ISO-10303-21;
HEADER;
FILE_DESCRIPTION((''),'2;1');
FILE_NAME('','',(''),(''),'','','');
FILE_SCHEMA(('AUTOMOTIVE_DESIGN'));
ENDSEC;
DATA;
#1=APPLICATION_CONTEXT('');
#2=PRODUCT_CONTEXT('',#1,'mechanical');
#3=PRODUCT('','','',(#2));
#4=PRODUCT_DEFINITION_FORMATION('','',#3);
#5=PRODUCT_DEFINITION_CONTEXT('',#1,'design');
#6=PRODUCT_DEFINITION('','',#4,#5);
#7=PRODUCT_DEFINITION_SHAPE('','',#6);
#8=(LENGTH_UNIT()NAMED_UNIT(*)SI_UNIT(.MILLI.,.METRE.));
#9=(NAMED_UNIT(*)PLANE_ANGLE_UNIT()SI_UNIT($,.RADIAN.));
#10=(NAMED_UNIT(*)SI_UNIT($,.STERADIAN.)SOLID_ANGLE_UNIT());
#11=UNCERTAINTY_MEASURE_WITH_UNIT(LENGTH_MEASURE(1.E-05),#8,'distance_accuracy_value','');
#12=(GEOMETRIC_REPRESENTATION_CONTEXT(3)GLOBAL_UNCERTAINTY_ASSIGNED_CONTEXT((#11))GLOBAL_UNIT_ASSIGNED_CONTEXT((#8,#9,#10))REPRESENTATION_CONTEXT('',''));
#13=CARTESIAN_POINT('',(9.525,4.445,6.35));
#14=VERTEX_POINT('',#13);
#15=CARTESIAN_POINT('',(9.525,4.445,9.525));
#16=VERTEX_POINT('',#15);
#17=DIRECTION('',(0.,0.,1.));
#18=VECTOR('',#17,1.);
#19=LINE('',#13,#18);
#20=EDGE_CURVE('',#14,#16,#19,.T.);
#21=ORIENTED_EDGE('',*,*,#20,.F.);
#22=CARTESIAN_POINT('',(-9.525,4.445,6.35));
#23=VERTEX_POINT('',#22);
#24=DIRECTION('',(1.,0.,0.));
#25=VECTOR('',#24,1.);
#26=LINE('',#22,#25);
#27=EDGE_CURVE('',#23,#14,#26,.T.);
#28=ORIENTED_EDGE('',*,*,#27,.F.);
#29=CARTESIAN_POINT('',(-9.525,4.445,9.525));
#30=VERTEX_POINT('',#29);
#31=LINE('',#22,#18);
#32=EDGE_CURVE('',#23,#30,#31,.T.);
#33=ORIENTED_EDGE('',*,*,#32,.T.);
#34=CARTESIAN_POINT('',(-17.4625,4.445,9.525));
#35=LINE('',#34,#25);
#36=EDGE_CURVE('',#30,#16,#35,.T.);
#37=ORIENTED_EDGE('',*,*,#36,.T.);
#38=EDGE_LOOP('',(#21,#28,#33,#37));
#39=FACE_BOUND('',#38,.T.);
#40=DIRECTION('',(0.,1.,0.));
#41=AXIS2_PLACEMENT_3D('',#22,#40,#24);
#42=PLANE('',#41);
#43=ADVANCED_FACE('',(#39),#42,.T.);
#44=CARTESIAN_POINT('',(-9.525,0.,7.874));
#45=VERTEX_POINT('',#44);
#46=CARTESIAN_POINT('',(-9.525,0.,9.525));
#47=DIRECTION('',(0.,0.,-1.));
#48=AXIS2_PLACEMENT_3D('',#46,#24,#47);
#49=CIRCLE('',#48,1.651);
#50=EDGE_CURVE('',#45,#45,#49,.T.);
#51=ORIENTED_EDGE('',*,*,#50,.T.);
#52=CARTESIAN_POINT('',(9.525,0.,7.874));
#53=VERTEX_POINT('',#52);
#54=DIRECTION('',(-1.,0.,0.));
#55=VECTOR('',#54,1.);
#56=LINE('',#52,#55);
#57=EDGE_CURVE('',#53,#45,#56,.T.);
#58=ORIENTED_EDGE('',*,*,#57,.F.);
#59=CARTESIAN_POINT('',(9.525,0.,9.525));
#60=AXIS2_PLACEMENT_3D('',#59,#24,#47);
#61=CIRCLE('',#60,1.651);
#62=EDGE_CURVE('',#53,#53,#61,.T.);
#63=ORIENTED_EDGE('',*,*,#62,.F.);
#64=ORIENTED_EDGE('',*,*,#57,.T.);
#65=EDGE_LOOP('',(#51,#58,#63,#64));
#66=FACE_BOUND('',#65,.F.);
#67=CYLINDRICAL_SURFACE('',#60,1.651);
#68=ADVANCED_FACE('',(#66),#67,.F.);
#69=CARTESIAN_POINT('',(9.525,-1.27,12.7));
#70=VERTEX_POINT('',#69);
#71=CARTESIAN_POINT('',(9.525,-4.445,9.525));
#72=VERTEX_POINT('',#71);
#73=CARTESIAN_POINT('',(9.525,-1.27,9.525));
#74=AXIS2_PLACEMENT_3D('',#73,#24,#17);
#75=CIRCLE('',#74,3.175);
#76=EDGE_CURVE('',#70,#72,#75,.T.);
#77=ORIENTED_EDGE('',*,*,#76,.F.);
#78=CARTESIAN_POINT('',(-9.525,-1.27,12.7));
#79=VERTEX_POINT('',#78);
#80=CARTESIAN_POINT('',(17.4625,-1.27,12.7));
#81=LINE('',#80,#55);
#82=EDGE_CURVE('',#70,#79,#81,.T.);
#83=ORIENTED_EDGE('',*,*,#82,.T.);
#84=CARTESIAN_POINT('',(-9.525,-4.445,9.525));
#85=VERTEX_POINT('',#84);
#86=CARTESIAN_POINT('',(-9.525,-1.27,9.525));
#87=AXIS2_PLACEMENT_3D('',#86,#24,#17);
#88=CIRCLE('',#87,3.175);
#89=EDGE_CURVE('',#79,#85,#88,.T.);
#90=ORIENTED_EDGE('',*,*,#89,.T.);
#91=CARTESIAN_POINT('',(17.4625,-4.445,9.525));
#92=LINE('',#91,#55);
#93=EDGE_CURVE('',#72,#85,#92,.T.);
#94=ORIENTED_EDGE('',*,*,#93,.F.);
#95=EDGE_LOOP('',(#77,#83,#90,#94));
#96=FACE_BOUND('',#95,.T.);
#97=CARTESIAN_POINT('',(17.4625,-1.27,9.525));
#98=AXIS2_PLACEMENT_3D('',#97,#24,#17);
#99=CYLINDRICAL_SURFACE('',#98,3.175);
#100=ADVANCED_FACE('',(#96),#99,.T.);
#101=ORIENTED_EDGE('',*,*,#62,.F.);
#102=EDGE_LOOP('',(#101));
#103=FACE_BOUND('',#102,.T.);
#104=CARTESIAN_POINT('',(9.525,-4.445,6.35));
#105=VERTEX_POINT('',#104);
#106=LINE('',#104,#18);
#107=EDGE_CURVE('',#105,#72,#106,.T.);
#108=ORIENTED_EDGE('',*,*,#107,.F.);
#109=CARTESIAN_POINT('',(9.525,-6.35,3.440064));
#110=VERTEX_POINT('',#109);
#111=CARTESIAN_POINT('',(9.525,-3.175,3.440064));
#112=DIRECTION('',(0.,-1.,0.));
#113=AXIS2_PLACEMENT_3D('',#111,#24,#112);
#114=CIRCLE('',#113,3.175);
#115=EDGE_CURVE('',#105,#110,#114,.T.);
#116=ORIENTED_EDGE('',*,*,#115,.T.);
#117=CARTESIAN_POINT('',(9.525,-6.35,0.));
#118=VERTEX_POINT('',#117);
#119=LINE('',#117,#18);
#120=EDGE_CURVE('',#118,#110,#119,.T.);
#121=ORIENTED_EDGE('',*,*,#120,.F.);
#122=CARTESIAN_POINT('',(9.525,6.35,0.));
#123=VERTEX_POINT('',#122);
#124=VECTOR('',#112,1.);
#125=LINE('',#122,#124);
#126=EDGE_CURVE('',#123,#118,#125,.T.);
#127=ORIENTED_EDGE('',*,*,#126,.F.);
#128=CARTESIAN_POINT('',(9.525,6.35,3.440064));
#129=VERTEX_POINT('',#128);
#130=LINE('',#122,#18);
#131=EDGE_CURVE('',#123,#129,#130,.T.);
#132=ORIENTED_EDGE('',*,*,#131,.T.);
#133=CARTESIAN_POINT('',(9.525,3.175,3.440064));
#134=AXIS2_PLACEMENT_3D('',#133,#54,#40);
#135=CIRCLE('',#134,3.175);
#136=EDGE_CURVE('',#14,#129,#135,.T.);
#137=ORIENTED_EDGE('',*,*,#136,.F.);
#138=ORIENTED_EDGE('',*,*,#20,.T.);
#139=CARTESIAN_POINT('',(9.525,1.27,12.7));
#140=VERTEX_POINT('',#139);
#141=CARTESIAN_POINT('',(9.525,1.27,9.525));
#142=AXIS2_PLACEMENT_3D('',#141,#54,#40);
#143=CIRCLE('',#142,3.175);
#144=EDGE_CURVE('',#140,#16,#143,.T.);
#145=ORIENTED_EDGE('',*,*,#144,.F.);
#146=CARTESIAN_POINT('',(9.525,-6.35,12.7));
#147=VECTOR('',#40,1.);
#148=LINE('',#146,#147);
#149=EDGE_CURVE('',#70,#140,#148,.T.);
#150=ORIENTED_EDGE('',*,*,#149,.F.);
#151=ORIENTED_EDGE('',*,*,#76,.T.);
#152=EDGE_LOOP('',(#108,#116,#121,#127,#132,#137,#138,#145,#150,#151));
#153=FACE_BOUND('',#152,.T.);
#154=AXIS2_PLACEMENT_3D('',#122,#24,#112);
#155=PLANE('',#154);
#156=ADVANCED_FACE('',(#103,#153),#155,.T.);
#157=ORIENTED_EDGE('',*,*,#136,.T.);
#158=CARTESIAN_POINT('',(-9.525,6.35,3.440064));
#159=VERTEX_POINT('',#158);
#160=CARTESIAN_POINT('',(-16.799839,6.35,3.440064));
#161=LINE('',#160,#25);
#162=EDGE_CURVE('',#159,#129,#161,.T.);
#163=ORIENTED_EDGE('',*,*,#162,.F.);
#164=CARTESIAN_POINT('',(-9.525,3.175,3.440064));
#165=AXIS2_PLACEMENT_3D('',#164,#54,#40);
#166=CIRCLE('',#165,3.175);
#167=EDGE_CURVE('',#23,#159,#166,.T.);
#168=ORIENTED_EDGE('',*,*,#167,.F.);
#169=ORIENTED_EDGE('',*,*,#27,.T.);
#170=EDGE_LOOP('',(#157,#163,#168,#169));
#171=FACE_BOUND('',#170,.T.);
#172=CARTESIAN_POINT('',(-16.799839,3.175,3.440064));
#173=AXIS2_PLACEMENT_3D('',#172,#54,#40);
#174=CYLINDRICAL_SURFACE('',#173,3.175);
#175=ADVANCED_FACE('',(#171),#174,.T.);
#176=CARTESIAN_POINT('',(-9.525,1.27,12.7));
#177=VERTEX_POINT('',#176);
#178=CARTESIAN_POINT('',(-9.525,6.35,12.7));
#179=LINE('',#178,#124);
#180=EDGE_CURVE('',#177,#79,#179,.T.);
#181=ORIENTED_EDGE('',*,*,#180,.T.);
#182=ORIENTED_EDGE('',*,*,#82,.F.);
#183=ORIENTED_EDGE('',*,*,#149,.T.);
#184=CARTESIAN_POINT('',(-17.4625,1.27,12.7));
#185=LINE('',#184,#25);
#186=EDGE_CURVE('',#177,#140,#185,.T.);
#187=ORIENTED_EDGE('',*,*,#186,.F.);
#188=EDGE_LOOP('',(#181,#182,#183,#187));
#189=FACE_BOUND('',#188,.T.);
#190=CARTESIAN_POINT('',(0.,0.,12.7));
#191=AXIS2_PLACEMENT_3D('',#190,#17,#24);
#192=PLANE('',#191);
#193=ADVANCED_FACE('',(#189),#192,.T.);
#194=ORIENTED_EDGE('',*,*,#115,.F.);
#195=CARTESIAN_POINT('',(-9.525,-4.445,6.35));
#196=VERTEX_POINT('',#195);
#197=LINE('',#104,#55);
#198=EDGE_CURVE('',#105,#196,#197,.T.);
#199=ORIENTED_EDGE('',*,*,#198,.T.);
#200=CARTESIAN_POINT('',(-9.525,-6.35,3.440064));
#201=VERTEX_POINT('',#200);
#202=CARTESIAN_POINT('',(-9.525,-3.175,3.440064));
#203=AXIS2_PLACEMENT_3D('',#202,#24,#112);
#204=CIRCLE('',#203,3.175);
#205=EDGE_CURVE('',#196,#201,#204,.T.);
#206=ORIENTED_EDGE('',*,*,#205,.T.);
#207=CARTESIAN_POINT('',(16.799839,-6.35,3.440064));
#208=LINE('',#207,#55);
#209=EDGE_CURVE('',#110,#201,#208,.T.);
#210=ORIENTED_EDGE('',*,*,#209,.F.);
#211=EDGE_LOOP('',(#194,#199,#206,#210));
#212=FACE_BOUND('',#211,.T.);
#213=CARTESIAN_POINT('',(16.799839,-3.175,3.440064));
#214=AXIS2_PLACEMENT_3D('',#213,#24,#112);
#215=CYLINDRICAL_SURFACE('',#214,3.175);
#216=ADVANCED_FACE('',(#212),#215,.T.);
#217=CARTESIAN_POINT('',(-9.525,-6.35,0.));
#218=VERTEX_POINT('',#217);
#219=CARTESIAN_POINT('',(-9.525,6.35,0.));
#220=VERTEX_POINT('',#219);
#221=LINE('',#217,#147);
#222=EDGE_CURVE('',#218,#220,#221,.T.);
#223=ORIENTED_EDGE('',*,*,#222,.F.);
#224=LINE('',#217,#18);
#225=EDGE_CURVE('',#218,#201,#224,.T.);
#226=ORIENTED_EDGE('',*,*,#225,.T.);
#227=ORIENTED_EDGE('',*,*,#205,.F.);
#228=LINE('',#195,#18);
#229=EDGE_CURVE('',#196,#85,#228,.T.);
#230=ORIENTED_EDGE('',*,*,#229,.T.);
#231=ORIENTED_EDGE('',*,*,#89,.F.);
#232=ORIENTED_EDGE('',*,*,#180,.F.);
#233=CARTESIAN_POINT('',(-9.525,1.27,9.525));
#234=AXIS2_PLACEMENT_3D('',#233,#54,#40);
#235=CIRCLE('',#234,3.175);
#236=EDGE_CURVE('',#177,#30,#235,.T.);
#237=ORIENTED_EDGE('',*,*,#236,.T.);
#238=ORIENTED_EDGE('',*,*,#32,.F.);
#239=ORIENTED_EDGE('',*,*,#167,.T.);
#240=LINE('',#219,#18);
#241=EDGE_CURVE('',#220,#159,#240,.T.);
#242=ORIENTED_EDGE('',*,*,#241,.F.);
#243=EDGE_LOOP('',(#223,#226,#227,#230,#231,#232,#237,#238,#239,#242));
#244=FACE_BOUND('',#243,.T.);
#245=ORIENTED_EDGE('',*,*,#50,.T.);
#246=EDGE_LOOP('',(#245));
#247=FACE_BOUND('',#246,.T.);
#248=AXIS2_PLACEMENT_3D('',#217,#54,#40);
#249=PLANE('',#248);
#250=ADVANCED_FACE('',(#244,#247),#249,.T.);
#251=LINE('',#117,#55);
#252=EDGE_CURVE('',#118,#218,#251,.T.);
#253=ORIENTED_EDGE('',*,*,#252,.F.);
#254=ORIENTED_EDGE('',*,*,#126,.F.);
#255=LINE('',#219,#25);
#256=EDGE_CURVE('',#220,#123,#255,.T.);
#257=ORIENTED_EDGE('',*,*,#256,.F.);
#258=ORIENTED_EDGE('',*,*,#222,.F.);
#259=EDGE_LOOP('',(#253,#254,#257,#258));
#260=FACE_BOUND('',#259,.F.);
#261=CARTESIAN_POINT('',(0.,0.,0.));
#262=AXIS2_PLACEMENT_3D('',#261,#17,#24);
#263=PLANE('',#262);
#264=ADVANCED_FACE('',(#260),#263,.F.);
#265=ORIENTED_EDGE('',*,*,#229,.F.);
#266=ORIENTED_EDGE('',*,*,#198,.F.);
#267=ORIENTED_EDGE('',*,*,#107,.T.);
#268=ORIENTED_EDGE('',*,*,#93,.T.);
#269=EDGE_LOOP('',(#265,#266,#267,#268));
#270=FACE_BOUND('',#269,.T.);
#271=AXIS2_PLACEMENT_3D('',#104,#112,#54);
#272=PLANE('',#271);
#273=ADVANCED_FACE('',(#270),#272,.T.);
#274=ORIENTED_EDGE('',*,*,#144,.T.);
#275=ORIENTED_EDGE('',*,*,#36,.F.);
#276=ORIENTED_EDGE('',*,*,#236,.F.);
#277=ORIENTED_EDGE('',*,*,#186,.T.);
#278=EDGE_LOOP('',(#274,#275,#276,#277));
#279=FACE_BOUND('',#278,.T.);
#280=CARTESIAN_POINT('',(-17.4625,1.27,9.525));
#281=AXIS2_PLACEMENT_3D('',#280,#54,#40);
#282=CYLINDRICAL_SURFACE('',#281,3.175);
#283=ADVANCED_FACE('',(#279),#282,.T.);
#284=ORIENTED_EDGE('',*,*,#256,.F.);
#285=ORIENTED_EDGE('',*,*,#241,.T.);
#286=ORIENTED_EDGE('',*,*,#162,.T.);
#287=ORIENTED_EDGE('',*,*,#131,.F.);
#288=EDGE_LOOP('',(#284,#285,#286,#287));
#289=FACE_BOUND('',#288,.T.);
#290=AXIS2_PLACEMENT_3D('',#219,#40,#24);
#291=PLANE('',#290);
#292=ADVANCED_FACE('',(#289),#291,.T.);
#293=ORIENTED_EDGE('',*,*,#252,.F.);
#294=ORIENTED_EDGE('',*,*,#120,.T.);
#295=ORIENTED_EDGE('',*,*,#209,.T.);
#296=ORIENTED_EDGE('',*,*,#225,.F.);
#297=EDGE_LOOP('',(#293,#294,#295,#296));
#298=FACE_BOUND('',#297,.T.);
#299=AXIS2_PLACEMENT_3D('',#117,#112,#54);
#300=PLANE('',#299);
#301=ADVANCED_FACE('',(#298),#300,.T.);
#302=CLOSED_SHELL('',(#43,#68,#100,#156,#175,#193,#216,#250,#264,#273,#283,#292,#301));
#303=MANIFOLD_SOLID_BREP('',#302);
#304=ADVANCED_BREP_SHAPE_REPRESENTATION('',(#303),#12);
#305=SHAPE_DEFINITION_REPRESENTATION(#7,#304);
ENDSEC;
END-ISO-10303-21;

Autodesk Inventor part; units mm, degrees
ref_plane "YZ Plane" through (0, 0, 0) normal (1, 0, 0) x (0, 1, 0)
ref_plane "XZ Plane" through (0, 0, 0) normal (0, 1, 0) x (-1, 0, 0)
ref_plane "XY Plane" through (0, 0, 0) normal (0, 0, 1) x (1, 0, 0)
sketch "Sketch1" plane through (0, 0, 0) normal (0, 0, 1) x (1, 0, 0)
  line L0 (9.525, -6.35) -> (-9.525, -6.35)
  line L1 (-9.525, -6.35) -> (-9.525, 6.35)
  line L2 (-9.525, 6.35) -> (9.525, 6.35)
  line L3 (9.525, 6.35) -> (9.525, -6.35)
  line L4 (9.525, -6.35) -> (-9.525, 6.35) construction
  line L5 (-9.525, -6.35) -> (9.525, 6.35) construction
  point P0 (0, 0)
  dimension "d0" = 19.05
  dimension "d1" = 12.7
extrude "Extrusion1" add sketch "Sketch1" along normal blind 6.35
sketch "Sketch2" plane through (0, 0, 6.35) normal (0, 0, 1) x (1, 0, 0)
  line L0 (9.525, 6.35) -> (-9.525, 6.35) projected
  line L1 (-9.525, 6.35) -> (-9.525, -6.35) projected
  line L2 (-9.525, -6.35) -> (9.525, -6.35) projected
  line L3 (9.525, -6.35) -> (9.525, 6.35) projected
  line L4 (9.525, -4.445) -> (-9.525, -4.445)
  line L5 (-9.525, -4.445) -> (-9.525, 4.445)
  line L6 (-9.525, 4.445) -> (9.525, 4.445)
  line L7 (9.525, 4.445) -> (9.525, -4.445)
  line L8 (9.525, -4.445) -> (-9.525, 4.445) construction
  line L9 (-9.525, -4.445) -> (9.525, 4.445) construction
  point P0 (0, 0)
  dimension "d4" = 19.05
  dimension "d5" = 8.89
extrude "Extrusion2" add sketch "Sketch2" along normal blind 6.35 contours L3 L4 L1 L6
sketch "Sketch3" plane through (9.525, -6.35, 0) normal (1, 0, 0) x (0, 0, -1)
  line L0 (0, 0) -> (0, 12.7) projected
  line L1 (0, 12.7) -> (-6.35, 12.7) projected
  line L2 (-6.35, 10.795) -> (-6.35, 12.7) projected
  line L3 (-6.35, 10.795) -> (-12.7, 10.795) projected
  line L4 (-12.7, 1.905) -> (-12.7, 10.795) projected
  line L5 (-6.35, 1.905) -> (-12.7, 1.905) projected
  line L6 (-6.35, 0) -> (-6.35, 1.905) projected
  line L7 (0, 0) -> (-6.35, 0) projected
  line L8 (-6.35, 12.7) -> (-6.35, 10.795) construction
  line L9 (-6.35, 10.795) -> (-6.35, 1.905) construction
  line L10 (-12.7, 6.35) -> (0, 6.35) construction
  line L11 (-9.525, 10.795) -> (-9.525, 1.905) construction
  line L12 (-6.35, 1.905) -> (-12.7, 1.905) construction
  circle A0 centre (-9.525, 6.35) radius 1.651
  dimension "d8" = 3.302
extrude "Extrusion3" cut sketch "Sketch3" against normal through all contours A0
fillet "Fillet1" radius 3.175 4 edges at (0, 4.445, 12.7) (0, -4.445, 12.7) (0, 6.35, 6.35) (0, -6.35, 6.35)
properties part number "Torsion_Spring_Mounts"
